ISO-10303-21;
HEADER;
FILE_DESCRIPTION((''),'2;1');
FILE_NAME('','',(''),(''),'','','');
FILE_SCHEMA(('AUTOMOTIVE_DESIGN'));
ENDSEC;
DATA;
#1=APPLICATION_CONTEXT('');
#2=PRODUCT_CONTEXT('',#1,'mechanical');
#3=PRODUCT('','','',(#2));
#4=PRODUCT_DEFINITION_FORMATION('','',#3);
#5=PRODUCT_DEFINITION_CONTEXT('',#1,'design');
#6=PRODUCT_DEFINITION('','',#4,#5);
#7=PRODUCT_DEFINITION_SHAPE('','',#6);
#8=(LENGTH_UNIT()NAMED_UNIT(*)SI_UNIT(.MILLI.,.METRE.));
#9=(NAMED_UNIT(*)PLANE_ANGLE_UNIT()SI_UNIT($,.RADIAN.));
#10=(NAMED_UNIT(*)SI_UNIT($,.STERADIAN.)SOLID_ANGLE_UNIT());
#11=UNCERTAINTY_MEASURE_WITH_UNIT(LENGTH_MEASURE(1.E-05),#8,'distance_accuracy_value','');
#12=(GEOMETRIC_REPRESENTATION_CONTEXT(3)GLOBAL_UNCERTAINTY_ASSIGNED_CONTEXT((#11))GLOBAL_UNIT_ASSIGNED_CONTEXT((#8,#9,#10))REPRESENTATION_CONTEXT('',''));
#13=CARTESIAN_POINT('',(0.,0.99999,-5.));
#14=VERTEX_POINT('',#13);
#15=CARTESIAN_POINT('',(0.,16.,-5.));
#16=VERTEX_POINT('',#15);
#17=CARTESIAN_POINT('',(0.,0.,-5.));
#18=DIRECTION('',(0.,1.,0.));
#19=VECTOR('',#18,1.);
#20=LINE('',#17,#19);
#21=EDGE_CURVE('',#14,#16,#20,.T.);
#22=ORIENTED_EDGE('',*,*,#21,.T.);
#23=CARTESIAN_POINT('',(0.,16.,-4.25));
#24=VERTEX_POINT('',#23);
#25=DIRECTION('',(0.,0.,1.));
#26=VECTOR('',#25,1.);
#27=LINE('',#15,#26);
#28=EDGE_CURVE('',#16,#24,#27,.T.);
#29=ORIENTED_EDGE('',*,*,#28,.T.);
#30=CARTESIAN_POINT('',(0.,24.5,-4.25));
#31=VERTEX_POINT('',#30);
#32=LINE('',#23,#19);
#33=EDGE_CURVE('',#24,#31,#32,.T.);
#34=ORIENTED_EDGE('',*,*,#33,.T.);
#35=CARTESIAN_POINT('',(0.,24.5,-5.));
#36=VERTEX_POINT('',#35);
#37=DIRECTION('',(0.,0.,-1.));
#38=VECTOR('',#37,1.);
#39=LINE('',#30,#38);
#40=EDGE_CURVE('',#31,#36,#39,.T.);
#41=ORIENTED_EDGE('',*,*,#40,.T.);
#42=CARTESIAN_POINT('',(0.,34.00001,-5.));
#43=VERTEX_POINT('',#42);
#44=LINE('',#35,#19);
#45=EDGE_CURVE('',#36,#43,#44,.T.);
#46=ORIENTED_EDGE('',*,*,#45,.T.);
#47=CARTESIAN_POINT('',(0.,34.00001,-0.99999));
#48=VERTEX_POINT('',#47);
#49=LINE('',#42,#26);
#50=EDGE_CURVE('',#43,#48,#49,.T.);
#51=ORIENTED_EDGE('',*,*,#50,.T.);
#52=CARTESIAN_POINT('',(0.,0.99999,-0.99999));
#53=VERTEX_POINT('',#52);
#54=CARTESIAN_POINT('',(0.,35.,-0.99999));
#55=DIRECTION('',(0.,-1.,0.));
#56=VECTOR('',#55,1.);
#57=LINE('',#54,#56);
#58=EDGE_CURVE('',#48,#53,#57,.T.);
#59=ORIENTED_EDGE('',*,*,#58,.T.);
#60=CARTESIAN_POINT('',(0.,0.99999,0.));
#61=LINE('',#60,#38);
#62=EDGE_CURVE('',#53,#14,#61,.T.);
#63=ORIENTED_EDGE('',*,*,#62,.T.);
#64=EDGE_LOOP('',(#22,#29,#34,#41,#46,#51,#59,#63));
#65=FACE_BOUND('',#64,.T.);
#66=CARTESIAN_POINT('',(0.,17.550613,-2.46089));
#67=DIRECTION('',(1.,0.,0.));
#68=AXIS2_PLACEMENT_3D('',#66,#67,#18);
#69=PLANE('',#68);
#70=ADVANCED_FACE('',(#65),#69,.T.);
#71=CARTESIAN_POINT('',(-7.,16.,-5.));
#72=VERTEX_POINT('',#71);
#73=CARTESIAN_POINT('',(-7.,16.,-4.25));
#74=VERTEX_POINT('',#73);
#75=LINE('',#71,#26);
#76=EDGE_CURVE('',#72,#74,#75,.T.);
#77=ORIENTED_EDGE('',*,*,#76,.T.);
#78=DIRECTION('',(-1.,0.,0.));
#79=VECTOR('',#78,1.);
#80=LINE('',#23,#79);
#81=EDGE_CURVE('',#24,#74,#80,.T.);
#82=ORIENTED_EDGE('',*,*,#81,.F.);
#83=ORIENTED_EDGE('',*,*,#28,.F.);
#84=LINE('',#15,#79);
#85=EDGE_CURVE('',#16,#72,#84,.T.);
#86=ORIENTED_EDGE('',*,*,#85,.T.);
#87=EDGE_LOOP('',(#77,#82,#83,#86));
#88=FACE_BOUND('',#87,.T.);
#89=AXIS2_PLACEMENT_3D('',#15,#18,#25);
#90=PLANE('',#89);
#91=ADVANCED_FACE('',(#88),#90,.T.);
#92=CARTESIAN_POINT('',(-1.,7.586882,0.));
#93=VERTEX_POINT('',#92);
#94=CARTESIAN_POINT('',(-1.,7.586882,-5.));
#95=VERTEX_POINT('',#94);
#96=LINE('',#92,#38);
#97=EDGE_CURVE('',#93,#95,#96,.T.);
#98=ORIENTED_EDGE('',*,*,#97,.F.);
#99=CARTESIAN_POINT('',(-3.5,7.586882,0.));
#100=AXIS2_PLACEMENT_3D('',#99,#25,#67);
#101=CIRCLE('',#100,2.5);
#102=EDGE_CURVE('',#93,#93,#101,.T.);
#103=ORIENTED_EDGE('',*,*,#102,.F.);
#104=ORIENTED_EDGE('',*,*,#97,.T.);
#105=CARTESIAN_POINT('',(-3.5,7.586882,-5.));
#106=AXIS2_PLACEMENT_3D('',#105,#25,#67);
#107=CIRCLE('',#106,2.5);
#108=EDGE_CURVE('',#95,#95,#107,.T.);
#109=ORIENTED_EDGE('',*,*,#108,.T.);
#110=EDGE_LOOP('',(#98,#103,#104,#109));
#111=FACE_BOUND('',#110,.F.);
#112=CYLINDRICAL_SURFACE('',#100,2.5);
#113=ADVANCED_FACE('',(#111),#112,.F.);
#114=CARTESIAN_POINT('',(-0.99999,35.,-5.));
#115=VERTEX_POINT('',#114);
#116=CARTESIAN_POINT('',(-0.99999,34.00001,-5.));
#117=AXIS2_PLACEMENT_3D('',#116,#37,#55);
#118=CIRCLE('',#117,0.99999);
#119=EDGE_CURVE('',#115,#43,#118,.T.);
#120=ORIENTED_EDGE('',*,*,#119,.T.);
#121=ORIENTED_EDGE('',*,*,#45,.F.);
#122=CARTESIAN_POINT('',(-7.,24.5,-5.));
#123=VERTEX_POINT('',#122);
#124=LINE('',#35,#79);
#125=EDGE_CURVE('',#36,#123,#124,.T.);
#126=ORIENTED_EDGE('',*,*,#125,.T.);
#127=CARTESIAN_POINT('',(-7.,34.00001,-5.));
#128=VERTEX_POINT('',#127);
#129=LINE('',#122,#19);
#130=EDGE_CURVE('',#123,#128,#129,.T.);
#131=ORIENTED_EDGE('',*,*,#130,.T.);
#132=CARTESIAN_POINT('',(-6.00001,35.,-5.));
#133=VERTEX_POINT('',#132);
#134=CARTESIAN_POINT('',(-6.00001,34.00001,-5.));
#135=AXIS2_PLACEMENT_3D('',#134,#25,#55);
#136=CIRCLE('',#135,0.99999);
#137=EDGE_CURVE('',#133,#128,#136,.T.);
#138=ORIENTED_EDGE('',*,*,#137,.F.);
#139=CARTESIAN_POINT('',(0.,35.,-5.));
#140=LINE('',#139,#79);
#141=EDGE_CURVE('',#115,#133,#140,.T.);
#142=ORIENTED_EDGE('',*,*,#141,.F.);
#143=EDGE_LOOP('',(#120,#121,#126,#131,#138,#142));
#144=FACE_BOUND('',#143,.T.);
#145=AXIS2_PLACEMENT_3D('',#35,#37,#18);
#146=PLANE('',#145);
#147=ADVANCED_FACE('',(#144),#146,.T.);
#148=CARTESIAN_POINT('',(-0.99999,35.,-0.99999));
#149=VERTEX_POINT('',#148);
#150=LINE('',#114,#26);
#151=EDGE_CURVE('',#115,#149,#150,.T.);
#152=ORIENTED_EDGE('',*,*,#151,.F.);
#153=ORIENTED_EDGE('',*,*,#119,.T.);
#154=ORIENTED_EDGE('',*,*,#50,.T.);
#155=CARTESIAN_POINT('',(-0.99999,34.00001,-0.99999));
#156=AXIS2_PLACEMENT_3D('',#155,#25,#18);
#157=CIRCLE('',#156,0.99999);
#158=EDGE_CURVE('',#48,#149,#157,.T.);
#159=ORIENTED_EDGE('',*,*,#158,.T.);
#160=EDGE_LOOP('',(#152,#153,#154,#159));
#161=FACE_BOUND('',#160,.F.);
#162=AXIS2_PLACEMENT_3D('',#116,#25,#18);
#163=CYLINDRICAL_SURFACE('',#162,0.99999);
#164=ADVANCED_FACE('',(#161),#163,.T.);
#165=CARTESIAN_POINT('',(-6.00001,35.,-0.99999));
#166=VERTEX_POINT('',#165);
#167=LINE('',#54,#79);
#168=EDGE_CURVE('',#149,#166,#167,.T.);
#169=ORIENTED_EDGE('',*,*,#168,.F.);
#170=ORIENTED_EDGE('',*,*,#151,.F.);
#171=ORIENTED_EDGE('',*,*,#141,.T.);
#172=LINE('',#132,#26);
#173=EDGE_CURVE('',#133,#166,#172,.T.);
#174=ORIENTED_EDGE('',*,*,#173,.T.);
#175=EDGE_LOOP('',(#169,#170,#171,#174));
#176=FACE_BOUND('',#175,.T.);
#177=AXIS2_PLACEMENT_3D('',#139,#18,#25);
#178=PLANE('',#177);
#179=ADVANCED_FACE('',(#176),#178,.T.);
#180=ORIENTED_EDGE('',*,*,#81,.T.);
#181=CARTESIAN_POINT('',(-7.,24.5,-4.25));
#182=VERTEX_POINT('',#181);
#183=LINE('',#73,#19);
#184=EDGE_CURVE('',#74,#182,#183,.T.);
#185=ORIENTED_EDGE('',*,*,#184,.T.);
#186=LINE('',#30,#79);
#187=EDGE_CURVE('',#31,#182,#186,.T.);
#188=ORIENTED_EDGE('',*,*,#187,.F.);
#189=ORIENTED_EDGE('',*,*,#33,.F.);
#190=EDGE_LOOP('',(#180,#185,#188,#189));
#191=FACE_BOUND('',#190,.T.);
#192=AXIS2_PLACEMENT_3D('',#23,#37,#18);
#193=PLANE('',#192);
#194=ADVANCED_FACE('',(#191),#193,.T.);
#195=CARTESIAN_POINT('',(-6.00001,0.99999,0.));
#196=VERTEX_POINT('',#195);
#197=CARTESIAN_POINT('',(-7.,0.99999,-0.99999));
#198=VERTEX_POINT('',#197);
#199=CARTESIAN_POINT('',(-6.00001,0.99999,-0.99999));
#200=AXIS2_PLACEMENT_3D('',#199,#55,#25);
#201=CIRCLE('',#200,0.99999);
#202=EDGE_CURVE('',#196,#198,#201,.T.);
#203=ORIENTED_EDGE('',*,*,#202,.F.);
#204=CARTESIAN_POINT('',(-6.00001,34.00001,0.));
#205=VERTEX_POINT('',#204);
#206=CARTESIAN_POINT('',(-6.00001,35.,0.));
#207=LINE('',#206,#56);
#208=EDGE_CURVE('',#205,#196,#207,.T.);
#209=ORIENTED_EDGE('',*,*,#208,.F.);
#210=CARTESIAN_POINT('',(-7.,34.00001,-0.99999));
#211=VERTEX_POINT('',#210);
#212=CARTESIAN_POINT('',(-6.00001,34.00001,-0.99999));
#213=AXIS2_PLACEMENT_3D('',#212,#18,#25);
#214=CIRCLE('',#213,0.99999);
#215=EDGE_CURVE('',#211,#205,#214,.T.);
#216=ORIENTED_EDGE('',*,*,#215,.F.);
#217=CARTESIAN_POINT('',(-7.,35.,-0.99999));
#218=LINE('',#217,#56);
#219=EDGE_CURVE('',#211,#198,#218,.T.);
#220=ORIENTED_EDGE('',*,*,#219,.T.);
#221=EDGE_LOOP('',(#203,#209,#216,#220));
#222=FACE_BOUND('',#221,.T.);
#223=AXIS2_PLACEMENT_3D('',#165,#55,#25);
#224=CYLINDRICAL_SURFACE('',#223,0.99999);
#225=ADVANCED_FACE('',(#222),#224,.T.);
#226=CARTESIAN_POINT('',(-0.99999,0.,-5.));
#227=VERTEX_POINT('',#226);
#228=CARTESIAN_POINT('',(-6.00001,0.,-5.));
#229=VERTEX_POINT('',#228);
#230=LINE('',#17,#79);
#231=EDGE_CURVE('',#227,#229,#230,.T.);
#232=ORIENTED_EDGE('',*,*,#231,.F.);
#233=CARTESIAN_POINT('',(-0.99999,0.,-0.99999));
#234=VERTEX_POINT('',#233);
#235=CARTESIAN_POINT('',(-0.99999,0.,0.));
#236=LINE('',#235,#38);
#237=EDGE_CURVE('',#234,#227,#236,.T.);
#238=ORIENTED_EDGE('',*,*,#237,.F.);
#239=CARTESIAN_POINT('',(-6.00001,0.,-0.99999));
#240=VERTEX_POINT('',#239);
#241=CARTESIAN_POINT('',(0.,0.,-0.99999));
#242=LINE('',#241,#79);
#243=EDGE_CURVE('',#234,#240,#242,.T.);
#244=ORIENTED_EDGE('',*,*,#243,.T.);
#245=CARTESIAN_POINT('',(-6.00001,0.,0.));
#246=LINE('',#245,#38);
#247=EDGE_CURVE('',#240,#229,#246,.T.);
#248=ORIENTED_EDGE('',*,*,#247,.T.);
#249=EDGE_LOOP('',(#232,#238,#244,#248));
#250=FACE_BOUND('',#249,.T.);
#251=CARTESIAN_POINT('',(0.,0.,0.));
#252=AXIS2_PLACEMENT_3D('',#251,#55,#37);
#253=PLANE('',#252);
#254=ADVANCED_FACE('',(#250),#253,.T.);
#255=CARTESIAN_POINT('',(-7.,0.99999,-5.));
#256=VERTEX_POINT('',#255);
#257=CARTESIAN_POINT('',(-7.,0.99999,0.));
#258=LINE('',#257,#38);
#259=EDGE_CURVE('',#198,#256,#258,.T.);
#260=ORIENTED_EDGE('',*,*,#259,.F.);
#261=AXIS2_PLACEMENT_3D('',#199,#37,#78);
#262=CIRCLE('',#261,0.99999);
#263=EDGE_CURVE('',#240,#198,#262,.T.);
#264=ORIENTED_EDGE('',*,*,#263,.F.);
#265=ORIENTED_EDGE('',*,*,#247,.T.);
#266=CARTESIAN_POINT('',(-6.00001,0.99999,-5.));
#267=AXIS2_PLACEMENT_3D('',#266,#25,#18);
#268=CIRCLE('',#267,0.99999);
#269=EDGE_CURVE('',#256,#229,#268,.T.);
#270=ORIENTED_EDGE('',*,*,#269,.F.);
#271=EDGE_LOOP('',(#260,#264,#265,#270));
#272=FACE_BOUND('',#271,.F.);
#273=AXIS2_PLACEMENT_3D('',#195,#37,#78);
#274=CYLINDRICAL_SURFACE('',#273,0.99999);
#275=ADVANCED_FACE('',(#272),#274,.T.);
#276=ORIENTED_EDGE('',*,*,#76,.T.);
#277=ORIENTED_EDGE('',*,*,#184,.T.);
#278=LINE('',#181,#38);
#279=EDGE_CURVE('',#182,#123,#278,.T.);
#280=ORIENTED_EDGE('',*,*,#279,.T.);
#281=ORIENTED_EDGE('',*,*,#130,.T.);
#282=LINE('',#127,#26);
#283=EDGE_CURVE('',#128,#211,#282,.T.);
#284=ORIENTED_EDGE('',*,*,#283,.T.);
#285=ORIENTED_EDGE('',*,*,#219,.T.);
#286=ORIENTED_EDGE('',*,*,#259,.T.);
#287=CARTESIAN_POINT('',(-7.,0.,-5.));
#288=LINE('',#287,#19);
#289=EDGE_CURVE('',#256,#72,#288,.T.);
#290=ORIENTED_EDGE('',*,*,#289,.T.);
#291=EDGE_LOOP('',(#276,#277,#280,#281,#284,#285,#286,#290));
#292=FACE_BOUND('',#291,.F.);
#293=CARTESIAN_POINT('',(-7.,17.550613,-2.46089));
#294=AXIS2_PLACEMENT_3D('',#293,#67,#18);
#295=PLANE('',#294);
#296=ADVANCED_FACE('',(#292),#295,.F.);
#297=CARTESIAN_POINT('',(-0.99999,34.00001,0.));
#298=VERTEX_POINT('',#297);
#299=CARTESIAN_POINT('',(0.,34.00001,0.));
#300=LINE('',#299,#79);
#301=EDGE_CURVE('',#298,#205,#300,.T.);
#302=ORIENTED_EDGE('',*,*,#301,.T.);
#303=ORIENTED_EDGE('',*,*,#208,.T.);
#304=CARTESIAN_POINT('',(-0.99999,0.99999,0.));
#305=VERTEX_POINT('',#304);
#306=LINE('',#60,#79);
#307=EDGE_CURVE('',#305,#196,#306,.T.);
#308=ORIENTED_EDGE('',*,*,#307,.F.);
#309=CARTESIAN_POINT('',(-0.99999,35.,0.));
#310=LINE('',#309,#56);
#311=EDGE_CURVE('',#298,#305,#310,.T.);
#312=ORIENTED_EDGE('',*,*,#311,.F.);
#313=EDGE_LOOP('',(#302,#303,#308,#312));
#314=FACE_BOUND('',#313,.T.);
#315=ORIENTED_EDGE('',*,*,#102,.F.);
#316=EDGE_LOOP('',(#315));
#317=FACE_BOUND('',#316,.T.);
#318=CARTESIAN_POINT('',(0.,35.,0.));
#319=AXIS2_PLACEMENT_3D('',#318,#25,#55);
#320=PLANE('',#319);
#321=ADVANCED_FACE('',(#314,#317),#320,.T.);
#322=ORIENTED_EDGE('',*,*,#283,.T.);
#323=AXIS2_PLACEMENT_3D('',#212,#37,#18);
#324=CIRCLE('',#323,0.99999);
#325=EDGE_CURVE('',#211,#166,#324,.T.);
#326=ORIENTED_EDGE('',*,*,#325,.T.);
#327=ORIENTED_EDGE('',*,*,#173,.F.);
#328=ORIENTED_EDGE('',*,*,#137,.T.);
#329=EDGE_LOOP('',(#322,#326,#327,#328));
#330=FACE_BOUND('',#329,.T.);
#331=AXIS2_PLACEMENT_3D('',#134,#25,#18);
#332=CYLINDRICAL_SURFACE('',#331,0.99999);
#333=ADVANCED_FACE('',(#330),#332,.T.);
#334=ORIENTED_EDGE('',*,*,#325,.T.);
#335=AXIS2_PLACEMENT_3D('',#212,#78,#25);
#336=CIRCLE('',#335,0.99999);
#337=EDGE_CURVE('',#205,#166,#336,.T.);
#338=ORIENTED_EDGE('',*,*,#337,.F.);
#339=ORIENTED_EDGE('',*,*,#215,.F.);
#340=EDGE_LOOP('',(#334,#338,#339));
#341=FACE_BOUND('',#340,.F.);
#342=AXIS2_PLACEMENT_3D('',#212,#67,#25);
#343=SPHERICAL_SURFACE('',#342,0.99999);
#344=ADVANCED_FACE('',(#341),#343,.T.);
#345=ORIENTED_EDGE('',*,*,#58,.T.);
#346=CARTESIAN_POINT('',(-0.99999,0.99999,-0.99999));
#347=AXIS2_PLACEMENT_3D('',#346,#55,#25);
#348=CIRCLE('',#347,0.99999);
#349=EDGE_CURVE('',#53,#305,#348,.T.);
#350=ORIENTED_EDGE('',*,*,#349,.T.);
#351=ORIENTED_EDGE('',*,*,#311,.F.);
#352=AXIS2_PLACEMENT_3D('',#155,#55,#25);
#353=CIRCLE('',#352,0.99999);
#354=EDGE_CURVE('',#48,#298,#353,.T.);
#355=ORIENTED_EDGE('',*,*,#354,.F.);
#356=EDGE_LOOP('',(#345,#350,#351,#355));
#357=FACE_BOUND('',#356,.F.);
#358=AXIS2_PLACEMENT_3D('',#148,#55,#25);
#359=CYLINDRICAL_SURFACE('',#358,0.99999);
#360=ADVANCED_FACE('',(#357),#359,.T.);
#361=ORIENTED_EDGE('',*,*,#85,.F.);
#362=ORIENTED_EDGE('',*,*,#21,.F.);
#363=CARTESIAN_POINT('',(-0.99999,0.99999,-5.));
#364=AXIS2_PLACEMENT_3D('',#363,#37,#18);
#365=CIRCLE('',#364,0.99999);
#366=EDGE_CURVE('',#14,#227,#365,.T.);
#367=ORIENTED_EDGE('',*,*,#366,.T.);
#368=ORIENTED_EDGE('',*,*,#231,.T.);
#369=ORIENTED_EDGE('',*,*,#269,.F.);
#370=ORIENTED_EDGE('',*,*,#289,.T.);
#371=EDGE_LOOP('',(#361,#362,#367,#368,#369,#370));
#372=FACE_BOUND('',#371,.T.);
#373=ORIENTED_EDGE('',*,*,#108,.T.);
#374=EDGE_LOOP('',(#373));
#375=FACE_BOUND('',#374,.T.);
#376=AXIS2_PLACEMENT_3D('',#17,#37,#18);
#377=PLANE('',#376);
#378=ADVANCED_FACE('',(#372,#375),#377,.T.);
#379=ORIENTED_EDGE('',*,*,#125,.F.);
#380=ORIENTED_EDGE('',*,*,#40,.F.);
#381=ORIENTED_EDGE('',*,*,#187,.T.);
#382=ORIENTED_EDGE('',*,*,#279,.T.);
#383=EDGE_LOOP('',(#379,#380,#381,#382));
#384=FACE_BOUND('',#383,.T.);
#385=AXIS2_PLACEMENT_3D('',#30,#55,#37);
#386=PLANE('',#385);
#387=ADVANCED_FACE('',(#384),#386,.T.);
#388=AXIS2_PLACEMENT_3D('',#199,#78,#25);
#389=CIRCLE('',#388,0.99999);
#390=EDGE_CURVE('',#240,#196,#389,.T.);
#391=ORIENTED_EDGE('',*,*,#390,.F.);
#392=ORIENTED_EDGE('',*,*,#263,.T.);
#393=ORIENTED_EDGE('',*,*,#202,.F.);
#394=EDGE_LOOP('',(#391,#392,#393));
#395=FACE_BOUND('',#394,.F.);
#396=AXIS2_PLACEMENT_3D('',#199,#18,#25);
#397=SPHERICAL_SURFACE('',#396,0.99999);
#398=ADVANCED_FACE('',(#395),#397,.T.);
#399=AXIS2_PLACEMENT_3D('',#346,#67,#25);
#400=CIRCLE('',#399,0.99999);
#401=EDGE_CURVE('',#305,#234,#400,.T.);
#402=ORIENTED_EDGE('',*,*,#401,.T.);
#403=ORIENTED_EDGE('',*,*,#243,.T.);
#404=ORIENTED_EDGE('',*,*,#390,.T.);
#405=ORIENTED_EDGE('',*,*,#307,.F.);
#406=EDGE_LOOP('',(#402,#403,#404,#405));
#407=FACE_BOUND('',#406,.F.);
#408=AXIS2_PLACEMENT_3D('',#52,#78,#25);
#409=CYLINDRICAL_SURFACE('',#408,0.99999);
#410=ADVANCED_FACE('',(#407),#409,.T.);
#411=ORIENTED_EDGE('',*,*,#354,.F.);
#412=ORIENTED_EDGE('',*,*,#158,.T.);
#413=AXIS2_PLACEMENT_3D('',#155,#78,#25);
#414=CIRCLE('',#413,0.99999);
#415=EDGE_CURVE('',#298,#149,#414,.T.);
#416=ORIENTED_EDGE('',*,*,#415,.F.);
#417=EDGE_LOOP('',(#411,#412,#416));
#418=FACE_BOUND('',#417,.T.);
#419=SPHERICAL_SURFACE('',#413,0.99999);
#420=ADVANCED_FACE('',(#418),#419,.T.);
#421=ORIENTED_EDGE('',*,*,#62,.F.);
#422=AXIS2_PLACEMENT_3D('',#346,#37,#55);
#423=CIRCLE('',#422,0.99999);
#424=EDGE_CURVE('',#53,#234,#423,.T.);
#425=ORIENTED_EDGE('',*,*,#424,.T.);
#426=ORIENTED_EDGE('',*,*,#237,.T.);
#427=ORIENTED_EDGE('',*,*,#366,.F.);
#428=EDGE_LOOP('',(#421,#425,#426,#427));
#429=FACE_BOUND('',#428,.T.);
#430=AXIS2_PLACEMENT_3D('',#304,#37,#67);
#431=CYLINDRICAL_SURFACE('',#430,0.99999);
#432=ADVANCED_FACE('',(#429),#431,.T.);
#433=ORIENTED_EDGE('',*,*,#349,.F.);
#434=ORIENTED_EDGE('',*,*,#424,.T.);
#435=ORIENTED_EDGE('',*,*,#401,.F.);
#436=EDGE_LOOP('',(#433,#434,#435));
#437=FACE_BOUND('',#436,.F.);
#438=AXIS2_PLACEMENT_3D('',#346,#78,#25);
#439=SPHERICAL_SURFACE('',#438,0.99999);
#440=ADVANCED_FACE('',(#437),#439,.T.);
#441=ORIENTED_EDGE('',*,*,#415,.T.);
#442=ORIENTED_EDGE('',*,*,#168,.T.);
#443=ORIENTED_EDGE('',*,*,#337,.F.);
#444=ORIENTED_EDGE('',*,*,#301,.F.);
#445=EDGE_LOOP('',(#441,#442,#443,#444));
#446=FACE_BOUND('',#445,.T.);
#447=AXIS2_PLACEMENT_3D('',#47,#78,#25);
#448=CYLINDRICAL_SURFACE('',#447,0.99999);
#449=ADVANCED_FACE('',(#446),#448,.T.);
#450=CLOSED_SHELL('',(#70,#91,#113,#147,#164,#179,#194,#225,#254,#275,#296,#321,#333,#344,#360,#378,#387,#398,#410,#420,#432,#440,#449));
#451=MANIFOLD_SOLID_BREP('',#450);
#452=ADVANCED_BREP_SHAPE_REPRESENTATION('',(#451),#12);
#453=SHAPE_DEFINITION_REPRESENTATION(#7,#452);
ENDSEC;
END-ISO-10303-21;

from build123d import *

# Parameters (mm, degrees)
F1_DEPTH = 7
F2_R     = 2.5
F3_DEPTH = 5.001
F4_R     = 0.99999


# Not quite as in the source:
# - a fillet or chamfer is up to 0.001 mm smaller than in the source, because OpenCascade refuses the exact size


with BuildPart() as f1:
    # F0 (on Right) → F1 (new body)
    with BuildSketch(Plane.YZ):
        Polygon((35, 0), (0, 0), (0, -5), (16, -5), (16, -4.25), (24.5, -4.25), (24.5, -5), (35, -5), align=None)
    extrude(amount=-F1_DEPTH)

    # F2 (on face) → F3 (cut, through all)
    with BuildSketch(Plane.XY):
        with Locations((-3.5, 7.5868815184)):
            Circle(F2_R)
    extrude(amount=-F3_DEPTH, mode=Mode.SUBTRACT)

    # F4 (radius 1 in the source; OpenCascade refuses exactly that, so slightly less here)
    f4_edges = [f1.edges().sort_by_distance(p)[0] for p in [
        (-3.5, 35, 0),
        (-7, 17.5, 0),
        (-3.5, 0, 0),
        (0, 17.5, 0),
        (0, 0, -2.5),
        (0, 35, -2.5),
        (-7, 35, -2.5),
        (-7, 0, -2.5),
    ]]
    fillet(f4_edges, radius=F4_R)


solid = f1.part
